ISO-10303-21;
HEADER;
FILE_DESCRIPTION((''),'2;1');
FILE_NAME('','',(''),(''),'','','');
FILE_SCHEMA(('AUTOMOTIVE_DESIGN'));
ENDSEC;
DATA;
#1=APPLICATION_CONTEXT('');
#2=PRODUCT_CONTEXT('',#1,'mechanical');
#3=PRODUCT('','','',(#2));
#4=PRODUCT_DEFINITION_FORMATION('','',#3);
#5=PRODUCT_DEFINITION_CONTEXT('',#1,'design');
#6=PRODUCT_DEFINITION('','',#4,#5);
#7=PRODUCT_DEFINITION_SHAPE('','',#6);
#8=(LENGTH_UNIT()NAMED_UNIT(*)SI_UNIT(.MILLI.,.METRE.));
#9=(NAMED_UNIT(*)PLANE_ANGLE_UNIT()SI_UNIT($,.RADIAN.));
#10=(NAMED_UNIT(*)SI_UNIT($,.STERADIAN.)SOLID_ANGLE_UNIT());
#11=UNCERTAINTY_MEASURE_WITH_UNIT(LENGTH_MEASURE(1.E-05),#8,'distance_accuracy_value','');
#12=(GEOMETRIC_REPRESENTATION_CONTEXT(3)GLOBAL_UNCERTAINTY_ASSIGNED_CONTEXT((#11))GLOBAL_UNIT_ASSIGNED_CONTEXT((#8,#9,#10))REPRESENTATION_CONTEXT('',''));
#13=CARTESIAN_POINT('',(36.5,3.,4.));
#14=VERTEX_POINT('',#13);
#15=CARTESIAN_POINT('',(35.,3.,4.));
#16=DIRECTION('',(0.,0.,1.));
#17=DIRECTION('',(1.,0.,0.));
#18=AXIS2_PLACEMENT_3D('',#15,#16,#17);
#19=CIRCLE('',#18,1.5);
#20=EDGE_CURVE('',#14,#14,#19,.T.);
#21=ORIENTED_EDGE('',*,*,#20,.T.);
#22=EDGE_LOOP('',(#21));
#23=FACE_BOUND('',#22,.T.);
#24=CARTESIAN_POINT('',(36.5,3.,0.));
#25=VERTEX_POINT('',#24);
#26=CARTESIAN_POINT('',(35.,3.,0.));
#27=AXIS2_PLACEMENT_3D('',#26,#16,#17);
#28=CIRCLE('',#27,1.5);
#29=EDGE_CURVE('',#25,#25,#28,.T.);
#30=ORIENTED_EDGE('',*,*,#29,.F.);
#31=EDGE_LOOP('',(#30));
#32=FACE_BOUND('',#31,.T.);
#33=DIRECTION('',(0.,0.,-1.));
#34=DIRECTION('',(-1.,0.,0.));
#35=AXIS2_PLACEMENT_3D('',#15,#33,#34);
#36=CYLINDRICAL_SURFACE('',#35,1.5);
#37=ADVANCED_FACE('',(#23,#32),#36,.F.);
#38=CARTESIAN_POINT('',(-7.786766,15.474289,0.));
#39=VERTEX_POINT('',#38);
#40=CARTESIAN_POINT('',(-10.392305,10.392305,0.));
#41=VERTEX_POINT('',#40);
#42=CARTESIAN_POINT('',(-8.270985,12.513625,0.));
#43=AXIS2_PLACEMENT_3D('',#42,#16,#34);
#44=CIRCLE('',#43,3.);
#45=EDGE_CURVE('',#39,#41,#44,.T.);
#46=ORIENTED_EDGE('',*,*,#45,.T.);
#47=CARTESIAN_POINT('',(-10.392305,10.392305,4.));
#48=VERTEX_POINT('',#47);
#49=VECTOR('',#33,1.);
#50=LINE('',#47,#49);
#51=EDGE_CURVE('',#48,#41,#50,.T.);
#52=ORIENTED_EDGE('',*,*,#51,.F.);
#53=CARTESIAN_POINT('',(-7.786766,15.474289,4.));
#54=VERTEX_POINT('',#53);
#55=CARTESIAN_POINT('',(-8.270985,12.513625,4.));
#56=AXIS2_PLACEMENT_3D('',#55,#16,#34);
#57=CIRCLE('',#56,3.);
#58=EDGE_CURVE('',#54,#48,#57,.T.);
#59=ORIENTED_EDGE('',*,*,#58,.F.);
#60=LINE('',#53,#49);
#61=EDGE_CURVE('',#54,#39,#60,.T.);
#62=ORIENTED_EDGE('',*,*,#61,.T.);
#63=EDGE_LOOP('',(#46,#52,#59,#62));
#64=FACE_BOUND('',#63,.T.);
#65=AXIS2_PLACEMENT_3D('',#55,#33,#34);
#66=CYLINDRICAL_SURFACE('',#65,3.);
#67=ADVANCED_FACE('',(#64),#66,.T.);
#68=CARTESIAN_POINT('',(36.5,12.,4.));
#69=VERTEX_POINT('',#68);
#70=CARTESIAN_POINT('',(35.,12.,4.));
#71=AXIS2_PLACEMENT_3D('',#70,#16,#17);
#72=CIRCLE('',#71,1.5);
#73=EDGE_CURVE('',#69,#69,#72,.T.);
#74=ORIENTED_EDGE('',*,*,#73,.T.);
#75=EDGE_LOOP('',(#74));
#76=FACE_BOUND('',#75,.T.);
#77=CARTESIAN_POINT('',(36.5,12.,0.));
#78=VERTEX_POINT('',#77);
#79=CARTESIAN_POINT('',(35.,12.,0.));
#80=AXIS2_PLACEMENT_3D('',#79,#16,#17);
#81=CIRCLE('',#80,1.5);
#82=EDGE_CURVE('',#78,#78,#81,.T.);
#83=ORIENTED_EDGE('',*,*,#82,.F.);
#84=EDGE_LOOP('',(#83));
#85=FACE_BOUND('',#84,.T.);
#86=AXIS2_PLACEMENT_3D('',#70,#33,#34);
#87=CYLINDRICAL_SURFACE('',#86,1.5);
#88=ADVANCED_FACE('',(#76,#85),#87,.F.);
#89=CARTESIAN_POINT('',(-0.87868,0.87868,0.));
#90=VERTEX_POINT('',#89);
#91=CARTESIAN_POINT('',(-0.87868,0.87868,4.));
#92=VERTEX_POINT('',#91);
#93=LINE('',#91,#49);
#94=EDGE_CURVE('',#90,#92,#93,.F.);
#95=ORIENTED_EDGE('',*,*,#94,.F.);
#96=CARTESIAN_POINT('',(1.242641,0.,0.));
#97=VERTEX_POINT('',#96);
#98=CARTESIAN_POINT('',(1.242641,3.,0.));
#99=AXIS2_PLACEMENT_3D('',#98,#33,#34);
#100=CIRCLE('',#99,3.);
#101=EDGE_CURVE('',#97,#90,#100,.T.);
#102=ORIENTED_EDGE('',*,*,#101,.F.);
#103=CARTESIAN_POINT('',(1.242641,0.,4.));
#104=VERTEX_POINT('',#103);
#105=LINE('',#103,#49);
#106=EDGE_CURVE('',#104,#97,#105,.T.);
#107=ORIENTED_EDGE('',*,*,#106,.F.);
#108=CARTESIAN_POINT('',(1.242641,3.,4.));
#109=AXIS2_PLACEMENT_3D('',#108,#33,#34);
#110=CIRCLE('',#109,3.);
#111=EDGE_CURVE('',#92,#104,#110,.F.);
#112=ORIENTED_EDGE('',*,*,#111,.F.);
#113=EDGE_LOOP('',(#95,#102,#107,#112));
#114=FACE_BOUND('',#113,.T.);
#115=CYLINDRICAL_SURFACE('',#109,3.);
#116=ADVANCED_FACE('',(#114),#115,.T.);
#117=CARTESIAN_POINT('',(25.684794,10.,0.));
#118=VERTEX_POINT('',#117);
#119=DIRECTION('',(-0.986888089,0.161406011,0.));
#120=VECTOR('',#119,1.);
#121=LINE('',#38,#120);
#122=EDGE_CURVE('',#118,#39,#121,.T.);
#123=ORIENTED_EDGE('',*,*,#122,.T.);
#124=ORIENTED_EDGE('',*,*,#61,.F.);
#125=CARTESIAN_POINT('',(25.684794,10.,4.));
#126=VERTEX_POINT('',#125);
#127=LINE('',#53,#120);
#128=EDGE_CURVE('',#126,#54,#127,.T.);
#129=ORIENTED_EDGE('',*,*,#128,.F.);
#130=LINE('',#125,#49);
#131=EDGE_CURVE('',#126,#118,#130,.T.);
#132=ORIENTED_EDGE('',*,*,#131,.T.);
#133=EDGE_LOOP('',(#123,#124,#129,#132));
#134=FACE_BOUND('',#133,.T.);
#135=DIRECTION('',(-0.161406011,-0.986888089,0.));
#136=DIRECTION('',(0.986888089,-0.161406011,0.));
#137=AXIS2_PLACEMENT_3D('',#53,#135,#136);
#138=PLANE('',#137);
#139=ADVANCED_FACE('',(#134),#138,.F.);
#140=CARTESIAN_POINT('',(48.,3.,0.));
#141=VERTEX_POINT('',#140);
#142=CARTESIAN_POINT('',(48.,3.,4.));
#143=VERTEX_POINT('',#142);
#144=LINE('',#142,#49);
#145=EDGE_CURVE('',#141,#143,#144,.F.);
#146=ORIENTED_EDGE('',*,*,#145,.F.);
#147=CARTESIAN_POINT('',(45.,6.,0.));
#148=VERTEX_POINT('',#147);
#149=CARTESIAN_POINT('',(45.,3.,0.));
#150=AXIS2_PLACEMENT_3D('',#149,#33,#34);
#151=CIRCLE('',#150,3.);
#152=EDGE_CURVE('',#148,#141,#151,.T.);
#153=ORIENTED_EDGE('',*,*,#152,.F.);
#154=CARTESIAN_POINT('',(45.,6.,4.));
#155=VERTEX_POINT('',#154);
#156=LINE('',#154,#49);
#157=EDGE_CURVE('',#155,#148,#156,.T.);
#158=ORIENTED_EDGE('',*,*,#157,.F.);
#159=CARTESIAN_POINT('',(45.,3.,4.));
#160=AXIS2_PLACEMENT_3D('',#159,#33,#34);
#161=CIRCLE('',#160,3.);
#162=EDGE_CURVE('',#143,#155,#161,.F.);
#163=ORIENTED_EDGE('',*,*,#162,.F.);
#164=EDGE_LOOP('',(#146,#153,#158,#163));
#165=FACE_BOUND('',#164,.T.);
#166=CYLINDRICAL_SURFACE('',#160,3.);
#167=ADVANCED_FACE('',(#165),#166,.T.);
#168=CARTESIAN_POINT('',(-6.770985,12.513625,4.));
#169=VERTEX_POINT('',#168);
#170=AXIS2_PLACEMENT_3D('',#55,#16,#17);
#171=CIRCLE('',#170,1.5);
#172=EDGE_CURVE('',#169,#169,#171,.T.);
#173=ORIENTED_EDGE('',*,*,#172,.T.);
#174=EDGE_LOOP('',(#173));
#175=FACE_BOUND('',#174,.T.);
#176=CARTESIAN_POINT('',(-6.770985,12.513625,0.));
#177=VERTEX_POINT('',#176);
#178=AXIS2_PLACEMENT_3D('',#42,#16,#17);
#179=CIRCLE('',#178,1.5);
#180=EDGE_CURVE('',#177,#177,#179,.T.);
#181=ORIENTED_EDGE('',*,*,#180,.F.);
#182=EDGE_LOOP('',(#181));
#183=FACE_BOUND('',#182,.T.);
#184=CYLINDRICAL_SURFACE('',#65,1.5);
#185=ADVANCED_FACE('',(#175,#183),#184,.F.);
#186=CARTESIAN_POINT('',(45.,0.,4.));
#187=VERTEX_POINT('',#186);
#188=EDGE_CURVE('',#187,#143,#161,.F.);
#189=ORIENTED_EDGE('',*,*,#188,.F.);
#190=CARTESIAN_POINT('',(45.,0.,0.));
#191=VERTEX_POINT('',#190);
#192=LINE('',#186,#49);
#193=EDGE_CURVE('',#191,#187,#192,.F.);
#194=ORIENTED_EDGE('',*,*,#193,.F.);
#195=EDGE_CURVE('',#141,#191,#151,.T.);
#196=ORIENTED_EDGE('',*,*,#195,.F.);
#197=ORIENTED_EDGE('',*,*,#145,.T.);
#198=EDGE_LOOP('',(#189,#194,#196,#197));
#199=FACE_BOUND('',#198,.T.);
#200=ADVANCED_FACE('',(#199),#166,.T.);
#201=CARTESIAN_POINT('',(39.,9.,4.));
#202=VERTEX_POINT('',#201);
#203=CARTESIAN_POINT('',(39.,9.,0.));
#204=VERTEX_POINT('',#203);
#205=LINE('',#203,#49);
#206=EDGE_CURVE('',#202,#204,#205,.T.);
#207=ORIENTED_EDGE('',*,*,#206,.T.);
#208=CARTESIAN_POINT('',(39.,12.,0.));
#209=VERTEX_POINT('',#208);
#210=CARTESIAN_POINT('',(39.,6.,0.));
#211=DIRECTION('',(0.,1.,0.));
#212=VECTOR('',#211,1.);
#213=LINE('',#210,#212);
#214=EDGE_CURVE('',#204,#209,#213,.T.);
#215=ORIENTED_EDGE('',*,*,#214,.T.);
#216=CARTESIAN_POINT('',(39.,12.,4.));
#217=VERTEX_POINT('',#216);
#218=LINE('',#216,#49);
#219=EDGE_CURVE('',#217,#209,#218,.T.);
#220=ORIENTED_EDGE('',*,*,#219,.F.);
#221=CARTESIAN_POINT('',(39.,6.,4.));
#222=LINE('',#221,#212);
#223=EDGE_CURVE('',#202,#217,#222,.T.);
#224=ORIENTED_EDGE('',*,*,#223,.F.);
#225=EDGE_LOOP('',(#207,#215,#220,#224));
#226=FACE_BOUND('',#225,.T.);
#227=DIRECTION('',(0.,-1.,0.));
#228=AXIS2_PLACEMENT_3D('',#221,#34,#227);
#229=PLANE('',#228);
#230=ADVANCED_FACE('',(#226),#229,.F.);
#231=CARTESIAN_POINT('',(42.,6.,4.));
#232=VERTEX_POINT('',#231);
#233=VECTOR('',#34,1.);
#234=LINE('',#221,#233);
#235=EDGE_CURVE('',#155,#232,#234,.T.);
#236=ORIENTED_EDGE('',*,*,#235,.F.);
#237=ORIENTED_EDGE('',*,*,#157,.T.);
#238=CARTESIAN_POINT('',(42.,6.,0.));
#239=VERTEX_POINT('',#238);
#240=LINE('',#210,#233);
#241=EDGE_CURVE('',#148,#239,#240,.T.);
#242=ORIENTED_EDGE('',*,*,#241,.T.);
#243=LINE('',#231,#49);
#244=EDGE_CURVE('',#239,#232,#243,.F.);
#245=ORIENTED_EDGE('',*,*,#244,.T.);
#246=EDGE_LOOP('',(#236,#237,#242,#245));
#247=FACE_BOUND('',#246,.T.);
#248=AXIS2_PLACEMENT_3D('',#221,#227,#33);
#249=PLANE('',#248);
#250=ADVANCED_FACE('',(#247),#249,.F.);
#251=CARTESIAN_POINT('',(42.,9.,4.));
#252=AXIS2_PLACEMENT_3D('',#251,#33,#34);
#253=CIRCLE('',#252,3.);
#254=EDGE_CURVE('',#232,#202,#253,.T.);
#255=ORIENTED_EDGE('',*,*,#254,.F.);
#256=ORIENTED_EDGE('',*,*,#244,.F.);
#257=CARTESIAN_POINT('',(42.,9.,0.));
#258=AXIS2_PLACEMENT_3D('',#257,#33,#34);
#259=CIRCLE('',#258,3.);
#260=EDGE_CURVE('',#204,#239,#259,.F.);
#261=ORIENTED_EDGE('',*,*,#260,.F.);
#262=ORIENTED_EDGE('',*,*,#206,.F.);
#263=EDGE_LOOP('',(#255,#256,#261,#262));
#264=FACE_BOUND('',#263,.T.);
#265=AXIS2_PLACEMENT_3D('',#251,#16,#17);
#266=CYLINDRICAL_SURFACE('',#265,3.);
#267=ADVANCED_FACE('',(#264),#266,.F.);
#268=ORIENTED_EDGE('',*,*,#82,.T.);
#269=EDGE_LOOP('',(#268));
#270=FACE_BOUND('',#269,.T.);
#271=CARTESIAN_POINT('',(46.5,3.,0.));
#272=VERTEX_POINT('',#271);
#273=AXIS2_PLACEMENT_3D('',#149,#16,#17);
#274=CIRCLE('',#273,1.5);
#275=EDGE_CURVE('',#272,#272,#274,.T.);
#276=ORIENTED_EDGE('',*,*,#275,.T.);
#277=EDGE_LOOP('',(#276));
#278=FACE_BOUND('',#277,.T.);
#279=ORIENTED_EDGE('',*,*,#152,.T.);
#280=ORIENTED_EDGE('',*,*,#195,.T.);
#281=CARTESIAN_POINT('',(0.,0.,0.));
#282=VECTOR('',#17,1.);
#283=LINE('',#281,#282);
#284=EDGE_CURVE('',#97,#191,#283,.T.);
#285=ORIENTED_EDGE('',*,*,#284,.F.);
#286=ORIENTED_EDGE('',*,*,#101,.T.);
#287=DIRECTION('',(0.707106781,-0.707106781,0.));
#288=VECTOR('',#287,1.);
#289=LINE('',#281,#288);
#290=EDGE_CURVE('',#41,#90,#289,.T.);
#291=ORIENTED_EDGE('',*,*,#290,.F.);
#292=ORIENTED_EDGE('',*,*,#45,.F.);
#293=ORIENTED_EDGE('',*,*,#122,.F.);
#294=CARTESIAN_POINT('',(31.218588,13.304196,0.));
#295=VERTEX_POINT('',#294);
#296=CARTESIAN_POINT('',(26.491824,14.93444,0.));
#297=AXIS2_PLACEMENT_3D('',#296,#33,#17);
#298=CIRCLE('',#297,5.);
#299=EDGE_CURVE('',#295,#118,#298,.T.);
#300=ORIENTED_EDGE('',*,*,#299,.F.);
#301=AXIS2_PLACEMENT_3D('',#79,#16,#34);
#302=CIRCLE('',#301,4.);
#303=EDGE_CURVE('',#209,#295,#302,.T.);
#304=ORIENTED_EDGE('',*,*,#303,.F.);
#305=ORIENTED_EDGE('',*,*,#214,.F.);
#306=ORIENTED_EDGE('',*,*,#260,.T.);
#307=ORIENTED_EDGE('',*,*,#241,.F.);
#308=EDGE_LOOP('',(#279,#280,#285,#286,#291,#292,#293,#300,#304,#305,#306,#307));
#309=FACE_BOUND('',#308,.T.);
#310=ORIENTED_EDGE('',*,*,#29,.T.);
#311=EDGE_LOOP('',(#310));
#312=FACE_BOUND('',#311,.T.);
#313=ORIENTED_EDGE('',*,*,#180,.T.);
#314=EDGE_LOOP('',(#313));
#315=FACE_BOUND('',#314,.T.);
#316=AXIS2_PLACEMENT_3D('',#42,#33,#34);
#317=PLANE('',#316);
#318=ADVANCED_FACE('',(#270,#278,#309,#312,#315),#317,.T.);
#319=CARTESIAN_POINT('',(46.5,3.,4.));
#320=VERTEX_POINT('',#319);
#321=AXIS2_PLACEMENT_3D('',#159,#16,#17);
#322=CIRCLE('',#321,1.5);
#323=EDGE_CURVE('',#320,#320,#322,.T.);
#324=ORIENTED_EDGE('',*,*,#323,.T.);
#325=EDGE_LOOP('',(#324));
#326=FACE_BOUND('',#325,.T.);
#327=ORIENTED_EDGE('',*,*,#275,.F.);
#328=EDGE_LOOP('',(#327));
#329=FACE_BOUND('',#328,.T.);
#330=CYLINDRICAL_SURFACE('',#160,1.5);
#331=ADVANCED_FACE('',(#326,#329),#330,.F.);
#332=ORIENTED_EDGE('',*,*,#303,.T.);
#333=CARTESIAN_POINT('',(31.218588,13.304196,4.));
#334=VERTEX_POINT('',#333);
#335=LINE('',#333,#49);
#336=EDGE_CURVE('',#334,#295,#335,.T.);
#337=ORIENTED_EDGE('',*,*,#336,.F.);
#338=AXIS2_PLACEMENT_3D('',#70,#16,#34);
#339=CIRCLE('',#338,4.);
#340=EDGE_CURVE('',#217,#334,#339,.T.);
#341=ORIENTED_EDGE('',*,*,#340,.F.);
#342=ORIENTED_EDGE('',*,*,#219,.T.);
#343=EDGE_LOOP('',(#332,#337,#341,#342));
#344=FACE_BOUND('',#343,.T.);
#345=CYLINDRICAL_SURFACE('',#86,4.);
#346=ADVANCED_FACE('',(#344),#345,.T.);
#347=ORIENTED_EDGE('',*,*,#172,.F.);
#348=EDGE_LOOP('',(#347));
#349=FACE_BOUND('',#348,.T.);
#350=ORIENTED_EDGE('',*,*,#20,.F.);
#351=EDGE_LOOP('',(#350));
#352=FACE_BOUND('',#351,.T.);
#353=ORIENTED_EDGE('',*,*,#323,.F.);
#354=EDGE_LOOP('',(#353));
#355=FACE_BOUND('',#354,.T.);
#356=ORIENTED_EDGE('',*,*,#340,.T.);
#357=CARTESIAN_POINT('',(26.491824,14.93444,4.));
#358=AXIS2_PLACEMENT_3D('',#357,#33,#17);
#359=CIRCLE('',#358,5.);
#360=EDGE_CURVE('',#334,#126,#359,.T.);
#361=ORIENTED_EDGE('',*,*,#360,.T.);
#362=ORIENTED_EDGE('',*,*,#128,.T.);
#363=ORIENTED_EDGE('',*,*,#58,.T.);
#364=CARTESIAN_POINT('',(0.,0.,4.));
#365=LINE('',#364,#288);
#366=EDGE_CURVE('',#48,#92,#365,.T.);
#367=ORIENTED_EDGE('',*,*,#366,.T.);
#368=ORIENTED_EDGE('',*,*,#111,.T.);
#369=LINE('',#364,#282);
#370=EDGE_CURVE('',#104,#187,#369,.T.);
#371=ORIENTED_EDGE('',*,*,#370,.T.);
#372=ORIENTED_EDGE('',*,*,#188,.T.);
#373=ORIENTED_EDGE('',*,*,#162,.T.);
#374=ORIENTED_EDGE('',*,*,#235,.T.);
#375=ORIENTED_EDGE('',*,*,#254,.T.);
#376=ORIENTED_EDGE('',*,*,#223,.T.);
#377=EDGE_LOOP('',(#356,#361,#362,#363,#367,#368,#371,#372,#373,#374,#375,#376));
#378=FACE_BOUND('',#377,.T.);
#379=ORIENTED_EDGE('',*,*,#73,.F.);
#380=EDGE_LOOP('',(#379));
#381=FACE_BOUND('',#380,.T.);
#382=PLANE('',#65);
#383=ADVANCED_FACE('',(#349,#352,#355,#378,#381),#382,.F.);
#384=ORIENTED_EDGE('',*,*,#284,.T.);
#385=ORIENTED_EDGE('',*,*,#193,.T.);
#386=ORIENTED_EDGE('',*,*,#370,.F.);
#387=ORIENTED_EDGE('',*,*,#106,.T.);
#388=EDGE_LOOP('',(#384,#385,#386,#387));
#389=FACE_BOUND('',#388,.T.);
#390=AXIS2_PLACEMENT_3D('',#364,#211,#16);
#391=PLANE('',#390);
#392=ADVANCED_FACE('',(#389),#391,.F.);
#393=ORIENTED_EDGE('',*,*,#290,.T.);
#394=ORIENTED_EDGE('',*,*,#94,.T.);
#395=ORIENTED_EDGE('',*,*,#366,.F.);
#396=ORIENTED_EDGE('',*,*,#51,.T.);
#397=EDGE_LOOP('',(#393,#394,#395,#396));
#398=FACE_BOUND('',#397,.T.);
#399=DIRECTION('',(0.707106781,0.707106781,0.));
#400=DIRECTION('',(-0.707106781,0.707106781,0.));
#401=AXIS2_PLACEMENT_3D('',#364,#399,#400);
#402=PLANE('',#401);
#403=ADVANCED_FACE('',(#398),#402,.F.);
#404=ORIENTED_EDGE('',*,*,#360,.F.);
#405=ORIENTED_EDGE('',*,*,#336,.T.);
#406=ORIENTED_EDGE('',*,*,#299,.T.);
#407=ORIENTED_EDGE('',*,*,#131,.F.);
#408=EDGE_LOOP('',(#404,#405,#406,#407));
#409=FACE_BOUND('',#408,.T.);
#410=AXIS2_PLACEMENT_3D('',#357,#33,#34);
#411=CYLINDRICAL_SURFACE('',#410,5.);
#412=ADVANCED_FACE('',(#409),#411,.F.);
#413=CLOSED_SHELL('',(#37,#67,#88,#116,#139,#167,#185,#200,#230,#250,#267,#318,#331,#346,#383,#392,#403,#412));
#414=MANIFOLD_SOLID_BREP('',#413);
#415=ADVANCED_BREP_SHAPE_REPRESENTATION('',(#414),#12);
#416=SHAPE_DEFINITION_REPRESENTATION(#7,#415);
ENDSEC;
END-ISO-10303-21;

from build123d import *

# Parameters (mm, degrees)
SKETCH1_R           = 1.5
BOSS_EXTRUDE1_DEPTH = 4
FILLET1_R           = 3


with BuildPart() as part:
    # Sketch1 → Boss-Extrude1 (new body)
    with BuildSketch(Plane.XY):
        with BuildLine():
            Line((0, 0), (48, 0))
            Line((48, 0), (48, 6))
            Line((48, 6), (39, 6))
            Line((39, 6), (39, 12))
            ThreePointArc((39, 12), (35.661193516, 15.944974415), (31.218588433, 13.304195753))
            ThreePointArc((31.218588433, 13.304195753), (29.055123964, 10.641481887), (25.684793917, 10))
            Line((25.684793917, 10), (-7.786766468, 15.474289455))
            ThreePointArc((-7.786766468, 15.474289455), (-10.94056647, 13.882322422), (-10.392304845, 10.392304845))
            Line((-10.392304845, 10.392304845), (0, 0))
        make_face()
        with Locations((35, 12)):
            Circle(SKETCH1_R, mode=Mode.SUBTRACT)
        with Locations((-8.270984502, 12.513625189)):
            Circle(SKETCH1_R, mode=Mode.SUBTRACT)
        with Locations((35, 3)):
            Circle(SKETCH1_R, mode=Mode.SUBTRACT)
        with Locations((45, 3)):
            Circle(SKETCH1_R, mode=Mode.SUBTRACT)
    extrude(amount=BOSS_EXTRUDE1_DEPTH)

    # Fillet1
    fillet1_edges = [part.edges().sort_by_distance(p)[0] for p in [
        (48, 0, 2),
        (48, 6, 2),
        (39, 6, 2),
        (0, 0, 2),
    ]]
    fillet(fillet1_edges, radius=FILLET1_R - 0.0001)  # a hair under: the kernel refuses the full size


solid = part.part
